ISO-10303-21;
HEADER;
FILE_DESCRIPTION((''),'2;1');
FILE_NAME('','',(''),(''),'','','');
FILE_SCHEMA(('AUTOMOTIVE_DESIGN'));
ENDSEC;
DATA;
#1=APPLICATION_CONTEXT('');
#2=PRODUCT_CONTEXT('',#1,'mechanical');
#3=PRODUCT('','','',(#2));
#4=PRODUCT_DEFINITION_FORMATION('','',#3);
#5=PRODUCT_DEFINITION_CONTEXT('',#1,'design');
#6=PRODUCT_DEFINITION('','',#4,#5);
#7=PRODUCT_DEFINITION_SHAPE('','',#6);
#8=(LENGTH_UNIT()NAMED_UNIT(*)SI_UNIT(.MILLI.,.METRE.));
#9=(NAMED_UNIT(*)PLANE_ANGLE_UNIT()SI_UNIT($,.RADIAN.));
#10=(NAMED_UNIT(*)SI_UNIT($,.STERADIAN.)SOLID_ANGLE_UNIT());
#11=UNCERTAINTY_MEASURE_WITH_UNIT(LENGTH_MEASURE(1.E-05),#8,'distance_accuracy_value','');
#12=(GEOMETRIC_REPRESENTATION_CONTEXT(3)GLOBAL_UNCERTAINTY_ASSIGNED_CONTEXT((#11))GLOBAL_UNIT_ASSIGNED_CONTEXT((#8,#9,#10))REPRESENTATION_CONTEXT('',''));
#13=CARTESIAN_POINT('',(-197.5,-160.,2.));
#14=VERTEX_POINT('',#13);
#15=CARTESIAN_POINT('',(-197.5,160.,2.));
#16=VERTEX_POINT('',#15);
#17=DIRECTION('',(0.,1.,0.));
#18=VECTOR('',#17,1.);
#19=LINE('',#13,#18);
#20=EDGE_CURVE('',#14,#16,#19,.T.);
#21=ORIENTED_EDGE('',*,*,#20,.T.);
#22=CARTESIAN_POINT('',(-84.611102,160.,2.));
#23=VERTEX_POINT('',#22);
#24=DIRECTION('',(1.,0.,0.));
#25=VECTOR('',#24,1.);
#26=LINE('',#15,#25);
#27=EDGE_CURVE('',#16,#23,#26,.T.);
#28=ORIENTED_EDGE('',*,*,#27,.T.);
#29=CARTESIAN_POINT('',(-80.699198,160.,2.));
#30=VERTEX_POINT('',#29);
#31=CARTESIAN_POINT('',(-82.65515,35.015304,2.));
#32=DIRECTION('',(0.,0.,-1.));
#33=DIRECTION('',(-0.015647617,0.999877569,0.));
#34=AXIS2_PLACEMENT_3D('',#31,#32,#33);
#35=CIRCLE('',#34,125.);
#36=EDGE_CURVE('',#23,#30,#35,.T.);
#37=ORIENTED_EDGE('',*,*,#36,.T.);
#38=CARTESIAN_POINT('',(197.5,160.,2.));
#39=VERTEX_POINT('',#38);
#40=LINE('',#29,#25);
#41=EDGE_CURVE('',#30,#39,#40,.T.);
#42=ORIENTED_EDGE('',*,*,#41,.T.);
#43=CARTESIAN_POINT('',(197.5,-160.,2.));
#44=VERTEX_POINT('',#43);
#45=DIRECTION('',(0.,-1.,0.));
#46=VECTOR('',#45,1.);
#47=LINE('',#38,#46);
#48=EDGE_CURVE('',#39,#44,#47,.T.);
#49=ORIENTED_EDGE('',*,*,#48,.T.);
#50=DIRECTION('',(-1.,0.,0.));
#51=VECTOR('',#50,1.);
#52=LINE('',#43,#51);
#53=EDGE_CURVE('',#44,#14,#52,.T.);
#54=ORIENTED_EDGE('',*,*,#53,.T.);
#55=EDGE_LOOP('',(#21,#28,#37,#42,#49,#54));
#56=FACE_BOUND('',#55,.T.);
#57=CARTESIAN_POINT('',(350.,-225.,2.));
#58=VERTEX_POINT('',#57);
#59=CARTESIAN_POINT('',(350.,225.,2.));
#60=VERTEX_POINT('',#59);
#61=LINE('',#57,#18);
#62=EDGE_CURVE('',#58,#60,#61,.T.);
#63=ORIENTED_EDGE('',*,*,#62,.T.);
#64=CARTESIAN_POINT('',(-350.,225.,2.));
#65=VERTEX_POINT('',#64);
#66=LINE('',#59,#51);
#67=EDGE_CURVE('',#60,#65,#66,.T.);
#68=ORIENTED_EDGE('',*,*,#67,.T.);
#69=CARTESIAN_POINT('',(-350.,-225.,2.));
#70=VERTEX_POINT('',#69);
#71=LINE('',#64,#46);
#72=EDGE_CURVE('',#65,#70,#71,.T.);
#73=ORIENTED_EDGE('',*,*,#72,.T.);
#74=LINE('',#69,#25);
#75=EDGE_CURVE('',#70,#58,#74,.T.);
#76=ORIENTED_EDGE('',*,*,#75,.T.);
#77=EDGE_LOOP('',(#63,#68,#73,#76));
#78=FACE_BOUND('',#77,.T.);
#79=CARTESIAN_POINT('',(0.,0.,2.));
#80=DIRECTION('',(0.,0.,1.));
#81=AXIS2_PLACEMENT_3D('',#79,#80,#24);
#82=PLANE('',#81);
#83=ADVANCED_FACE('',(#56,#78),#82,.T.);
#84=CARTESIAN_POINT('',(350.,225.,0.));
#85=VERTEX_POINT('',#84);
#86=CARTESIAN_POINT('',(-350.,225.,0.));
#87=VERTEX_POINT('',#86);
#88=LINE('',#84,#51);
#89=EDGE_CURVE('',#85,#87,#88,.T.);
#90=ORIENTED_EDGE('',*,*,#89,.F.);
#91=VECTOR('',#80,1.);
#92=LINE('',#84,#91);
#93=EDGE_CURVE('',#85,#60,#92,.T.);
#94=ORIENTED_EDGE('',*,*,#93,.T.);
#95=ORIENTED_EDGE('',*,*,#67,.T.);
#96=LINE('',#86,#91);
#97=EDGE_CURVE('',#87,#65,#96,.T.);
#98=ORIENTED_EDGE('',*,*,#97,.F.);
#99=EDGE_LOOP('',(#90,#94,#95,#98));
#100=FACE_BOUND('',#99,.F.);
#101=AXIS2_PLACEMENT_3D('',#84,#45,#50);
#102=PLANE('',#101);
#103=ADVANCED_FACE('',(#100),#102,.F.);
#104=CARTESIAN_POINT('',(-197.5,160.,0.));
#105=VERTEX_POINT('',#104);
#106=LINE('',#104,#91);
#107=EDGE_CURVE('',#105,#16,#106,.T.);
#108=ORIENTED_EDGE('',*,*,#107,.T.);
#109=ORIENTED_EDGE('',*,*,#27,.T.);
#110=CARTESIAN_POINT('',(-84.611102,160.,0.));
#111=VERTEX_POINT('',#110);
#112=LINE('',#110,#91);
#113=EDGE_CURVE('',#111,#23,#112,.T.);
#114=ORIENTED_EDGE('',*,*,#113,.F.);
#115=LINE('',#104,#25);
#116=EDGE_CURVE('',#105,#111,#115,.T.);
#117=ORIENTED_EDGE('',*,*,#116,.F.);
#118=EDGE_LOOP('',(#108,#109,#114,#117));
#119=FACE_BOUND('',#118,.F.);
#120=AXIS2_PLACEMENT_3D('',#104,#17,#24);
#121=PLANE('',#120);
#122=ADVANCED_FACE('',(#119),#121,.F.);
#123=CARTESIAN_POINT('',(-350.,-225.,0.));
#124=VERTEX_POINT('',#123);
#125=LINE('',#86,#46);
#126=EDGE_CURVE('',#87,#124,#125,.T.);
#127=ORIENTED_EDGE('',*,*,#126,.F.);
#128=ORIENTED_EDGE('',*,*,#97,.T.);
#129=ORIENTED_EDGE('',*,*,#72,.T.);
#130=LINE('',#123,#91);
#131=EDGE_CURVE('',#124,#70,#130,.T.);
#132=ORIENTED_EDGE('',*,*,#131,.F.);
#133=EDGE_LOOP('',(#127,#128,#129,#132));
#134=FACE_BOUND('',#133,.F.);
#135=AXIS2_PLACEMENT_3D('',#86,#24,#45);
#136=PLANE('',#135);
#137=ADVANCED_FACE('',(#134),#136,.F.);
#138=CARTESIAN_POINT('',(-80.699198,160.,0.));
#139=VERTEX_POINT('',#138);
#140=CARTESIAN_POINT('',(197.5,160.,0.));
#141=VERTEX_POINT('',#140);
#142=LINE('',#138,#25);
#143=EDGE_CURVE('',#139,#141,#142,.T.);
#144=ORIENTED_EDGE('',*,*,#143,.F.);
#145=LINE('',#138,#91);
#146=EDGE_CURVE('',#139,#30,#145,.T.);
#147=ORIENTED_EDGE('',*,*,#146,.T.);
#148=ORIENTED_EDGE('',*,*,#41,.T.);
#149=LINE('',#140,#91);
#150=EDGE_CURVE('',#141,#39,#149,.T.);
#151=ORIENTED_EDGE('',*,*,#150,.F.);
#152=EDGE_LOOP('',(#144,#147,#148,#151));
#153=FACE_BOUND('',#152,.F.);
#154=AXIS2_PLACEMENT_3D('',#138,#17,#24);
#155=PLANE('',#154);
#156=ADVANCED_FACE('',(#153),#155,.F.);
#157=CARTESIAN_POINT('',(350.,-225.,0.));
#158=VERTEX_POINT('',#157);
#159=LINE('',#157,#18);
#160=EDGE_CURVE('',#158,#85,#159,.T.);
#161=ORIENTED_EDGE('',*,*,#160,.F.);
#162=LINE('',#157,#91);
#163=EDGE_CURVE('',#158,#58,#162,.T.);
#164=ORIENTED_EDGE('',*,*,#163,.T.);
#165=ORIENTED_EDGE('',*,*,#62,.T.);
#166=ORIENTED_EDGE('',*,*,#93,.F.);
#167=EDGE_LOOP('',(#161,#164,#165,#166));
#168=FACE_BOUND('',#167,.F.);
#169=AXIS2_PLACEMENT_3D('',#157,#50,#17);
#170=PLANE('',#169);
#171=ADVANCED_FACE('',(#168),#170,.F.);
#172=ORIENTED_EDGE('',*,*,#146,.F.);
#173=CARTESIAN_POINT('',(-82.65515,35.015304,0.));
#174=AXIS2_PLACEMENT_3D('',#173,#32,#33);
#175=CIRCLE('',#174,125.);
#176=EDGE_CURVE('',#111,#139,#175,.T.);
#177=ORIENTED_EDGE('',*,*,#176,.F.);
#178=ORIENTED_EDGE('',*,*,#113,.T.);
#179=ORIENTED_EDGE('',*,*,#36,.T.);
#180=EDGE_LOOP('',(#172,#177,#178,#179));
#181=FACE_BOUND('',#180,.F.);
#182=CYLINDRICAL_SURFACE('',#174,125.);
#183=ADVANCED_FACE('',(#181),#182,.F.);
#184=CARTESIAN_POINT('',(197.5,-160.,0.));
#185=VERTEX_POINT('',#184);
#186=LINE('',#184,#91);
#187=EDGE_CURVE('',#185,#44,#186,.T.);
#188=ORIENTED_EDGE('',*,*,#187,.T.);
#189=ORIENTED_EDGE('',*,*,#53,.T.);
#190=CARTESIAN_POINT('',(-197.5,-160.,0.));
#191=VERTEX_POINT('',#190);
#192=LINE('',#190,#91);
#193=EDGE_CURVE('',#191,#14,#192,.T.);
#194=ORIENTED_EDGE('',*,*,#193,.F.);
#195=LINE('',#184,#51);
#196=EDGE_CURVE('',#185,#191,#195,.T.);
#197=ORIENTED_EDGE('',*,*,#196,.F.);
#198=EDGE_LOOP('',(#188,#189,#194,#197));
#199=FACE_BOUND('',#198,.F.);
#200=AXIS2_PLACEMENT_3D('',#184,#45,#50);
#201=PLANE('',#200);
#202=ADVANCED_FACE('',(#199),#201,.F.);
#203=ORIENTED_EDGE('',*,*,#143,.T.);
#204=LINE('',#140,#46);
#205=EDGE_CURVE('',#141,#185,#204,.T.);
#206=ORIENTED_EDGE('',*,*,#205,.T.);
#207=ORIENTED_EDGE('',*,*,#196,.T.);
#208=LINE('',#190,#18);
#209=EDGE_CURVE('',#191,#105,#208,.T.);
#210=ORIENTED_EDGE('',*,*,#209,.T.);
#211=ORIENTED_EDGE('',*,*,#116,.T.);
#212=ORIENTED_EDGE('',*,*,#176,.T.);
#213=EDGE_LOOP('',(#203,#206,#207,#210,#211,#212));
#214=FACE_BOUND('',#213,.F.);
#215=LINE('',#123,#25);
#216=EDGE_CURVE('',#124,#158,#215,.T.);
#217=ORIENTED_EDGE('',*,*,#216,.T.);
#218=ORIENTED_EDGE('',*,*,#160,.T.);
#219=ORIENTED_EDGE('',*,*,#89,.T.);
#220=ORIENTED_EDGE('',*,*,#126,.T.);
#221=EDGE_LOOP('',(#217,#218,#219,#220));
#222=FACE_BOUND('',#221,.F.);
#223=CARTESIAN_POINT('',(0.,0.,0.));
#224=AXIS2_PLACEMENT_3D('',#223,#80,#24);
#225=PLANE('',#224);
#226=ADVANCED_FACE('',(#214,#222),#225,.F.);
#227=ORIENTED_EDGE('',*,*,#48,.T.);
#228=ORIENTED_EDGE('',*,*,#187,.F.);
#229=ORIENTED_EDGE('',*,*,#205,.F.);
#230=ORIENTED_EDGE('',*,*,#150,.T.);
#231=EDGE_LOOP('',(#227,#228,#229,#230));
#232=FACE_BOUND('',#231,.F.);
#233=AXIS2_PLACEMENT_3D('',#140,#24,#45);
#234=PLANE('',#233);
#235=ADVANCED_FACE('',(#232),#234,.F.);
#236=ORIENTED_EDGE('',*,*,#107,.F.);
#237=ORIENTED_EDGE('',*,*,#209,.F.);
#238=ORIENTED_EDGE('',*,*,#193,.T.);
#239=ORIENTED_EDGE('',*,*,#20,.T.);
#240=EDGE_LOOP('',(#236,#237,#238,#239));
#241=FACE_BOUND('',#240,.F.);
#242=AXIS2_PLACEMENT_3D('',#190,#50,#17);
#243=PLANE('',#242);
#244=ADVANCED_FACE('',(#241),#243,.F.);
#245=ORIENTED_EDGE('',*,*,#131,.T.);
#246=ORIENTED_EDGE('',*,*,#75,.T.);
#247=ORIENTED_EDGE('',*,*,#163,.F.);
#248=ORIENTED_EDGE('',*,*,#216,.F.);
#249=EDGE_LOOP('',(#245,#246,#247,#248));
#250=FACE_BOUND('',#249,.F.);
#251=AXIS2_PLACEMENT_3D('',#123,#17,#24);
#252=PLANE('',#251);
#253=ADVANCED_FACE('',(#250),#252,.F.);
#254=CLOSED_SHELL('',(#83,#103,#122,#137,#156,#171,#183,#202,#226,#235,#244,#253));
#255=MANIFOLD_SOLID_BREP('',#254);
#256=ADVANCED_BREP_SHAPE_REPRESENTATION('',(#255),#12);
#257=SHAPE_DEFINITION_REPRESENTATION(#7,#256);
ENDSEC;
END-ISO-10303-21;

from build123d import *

# Parameters (mm, degrees)
F2_DEPTH = 2


# Not quite as in the source:
# - the program builds the solid bodies; features that only make, move or delete a surface that nothing else refers to are left out


with BuildPart() as f2:
    # F0 (on Top) → F2 (new body)
    with BuildSketch(Plane.XY):
        Polygon((-350, -225), (350, -225), (350, -217.2532975674), (350, 225), (-350, 225), align=None)
        with BuildLine():
            Line((197.5, 160), (197.5, -160))
            Line((197.5, -160), (-197.5, -160))
            Line((-197.5, -160), (-197.5, 84.3677148223))
            Line((-197.5, 84.3677148223), (-197.5, 160))
            Line((-197.5, 160), (-84.6111023318, 160))
            ThreePointArc((-84.6111023318, 160), (-82.6551501399, 160.0153039327), (-80.699197948, 160))
            Line((-80.699197948, 160), (197.5, 160))
        make_face(mode=Mode.SUBTRACT)
    extrude(amount=F2_DEPTH)


solid = f2.part
